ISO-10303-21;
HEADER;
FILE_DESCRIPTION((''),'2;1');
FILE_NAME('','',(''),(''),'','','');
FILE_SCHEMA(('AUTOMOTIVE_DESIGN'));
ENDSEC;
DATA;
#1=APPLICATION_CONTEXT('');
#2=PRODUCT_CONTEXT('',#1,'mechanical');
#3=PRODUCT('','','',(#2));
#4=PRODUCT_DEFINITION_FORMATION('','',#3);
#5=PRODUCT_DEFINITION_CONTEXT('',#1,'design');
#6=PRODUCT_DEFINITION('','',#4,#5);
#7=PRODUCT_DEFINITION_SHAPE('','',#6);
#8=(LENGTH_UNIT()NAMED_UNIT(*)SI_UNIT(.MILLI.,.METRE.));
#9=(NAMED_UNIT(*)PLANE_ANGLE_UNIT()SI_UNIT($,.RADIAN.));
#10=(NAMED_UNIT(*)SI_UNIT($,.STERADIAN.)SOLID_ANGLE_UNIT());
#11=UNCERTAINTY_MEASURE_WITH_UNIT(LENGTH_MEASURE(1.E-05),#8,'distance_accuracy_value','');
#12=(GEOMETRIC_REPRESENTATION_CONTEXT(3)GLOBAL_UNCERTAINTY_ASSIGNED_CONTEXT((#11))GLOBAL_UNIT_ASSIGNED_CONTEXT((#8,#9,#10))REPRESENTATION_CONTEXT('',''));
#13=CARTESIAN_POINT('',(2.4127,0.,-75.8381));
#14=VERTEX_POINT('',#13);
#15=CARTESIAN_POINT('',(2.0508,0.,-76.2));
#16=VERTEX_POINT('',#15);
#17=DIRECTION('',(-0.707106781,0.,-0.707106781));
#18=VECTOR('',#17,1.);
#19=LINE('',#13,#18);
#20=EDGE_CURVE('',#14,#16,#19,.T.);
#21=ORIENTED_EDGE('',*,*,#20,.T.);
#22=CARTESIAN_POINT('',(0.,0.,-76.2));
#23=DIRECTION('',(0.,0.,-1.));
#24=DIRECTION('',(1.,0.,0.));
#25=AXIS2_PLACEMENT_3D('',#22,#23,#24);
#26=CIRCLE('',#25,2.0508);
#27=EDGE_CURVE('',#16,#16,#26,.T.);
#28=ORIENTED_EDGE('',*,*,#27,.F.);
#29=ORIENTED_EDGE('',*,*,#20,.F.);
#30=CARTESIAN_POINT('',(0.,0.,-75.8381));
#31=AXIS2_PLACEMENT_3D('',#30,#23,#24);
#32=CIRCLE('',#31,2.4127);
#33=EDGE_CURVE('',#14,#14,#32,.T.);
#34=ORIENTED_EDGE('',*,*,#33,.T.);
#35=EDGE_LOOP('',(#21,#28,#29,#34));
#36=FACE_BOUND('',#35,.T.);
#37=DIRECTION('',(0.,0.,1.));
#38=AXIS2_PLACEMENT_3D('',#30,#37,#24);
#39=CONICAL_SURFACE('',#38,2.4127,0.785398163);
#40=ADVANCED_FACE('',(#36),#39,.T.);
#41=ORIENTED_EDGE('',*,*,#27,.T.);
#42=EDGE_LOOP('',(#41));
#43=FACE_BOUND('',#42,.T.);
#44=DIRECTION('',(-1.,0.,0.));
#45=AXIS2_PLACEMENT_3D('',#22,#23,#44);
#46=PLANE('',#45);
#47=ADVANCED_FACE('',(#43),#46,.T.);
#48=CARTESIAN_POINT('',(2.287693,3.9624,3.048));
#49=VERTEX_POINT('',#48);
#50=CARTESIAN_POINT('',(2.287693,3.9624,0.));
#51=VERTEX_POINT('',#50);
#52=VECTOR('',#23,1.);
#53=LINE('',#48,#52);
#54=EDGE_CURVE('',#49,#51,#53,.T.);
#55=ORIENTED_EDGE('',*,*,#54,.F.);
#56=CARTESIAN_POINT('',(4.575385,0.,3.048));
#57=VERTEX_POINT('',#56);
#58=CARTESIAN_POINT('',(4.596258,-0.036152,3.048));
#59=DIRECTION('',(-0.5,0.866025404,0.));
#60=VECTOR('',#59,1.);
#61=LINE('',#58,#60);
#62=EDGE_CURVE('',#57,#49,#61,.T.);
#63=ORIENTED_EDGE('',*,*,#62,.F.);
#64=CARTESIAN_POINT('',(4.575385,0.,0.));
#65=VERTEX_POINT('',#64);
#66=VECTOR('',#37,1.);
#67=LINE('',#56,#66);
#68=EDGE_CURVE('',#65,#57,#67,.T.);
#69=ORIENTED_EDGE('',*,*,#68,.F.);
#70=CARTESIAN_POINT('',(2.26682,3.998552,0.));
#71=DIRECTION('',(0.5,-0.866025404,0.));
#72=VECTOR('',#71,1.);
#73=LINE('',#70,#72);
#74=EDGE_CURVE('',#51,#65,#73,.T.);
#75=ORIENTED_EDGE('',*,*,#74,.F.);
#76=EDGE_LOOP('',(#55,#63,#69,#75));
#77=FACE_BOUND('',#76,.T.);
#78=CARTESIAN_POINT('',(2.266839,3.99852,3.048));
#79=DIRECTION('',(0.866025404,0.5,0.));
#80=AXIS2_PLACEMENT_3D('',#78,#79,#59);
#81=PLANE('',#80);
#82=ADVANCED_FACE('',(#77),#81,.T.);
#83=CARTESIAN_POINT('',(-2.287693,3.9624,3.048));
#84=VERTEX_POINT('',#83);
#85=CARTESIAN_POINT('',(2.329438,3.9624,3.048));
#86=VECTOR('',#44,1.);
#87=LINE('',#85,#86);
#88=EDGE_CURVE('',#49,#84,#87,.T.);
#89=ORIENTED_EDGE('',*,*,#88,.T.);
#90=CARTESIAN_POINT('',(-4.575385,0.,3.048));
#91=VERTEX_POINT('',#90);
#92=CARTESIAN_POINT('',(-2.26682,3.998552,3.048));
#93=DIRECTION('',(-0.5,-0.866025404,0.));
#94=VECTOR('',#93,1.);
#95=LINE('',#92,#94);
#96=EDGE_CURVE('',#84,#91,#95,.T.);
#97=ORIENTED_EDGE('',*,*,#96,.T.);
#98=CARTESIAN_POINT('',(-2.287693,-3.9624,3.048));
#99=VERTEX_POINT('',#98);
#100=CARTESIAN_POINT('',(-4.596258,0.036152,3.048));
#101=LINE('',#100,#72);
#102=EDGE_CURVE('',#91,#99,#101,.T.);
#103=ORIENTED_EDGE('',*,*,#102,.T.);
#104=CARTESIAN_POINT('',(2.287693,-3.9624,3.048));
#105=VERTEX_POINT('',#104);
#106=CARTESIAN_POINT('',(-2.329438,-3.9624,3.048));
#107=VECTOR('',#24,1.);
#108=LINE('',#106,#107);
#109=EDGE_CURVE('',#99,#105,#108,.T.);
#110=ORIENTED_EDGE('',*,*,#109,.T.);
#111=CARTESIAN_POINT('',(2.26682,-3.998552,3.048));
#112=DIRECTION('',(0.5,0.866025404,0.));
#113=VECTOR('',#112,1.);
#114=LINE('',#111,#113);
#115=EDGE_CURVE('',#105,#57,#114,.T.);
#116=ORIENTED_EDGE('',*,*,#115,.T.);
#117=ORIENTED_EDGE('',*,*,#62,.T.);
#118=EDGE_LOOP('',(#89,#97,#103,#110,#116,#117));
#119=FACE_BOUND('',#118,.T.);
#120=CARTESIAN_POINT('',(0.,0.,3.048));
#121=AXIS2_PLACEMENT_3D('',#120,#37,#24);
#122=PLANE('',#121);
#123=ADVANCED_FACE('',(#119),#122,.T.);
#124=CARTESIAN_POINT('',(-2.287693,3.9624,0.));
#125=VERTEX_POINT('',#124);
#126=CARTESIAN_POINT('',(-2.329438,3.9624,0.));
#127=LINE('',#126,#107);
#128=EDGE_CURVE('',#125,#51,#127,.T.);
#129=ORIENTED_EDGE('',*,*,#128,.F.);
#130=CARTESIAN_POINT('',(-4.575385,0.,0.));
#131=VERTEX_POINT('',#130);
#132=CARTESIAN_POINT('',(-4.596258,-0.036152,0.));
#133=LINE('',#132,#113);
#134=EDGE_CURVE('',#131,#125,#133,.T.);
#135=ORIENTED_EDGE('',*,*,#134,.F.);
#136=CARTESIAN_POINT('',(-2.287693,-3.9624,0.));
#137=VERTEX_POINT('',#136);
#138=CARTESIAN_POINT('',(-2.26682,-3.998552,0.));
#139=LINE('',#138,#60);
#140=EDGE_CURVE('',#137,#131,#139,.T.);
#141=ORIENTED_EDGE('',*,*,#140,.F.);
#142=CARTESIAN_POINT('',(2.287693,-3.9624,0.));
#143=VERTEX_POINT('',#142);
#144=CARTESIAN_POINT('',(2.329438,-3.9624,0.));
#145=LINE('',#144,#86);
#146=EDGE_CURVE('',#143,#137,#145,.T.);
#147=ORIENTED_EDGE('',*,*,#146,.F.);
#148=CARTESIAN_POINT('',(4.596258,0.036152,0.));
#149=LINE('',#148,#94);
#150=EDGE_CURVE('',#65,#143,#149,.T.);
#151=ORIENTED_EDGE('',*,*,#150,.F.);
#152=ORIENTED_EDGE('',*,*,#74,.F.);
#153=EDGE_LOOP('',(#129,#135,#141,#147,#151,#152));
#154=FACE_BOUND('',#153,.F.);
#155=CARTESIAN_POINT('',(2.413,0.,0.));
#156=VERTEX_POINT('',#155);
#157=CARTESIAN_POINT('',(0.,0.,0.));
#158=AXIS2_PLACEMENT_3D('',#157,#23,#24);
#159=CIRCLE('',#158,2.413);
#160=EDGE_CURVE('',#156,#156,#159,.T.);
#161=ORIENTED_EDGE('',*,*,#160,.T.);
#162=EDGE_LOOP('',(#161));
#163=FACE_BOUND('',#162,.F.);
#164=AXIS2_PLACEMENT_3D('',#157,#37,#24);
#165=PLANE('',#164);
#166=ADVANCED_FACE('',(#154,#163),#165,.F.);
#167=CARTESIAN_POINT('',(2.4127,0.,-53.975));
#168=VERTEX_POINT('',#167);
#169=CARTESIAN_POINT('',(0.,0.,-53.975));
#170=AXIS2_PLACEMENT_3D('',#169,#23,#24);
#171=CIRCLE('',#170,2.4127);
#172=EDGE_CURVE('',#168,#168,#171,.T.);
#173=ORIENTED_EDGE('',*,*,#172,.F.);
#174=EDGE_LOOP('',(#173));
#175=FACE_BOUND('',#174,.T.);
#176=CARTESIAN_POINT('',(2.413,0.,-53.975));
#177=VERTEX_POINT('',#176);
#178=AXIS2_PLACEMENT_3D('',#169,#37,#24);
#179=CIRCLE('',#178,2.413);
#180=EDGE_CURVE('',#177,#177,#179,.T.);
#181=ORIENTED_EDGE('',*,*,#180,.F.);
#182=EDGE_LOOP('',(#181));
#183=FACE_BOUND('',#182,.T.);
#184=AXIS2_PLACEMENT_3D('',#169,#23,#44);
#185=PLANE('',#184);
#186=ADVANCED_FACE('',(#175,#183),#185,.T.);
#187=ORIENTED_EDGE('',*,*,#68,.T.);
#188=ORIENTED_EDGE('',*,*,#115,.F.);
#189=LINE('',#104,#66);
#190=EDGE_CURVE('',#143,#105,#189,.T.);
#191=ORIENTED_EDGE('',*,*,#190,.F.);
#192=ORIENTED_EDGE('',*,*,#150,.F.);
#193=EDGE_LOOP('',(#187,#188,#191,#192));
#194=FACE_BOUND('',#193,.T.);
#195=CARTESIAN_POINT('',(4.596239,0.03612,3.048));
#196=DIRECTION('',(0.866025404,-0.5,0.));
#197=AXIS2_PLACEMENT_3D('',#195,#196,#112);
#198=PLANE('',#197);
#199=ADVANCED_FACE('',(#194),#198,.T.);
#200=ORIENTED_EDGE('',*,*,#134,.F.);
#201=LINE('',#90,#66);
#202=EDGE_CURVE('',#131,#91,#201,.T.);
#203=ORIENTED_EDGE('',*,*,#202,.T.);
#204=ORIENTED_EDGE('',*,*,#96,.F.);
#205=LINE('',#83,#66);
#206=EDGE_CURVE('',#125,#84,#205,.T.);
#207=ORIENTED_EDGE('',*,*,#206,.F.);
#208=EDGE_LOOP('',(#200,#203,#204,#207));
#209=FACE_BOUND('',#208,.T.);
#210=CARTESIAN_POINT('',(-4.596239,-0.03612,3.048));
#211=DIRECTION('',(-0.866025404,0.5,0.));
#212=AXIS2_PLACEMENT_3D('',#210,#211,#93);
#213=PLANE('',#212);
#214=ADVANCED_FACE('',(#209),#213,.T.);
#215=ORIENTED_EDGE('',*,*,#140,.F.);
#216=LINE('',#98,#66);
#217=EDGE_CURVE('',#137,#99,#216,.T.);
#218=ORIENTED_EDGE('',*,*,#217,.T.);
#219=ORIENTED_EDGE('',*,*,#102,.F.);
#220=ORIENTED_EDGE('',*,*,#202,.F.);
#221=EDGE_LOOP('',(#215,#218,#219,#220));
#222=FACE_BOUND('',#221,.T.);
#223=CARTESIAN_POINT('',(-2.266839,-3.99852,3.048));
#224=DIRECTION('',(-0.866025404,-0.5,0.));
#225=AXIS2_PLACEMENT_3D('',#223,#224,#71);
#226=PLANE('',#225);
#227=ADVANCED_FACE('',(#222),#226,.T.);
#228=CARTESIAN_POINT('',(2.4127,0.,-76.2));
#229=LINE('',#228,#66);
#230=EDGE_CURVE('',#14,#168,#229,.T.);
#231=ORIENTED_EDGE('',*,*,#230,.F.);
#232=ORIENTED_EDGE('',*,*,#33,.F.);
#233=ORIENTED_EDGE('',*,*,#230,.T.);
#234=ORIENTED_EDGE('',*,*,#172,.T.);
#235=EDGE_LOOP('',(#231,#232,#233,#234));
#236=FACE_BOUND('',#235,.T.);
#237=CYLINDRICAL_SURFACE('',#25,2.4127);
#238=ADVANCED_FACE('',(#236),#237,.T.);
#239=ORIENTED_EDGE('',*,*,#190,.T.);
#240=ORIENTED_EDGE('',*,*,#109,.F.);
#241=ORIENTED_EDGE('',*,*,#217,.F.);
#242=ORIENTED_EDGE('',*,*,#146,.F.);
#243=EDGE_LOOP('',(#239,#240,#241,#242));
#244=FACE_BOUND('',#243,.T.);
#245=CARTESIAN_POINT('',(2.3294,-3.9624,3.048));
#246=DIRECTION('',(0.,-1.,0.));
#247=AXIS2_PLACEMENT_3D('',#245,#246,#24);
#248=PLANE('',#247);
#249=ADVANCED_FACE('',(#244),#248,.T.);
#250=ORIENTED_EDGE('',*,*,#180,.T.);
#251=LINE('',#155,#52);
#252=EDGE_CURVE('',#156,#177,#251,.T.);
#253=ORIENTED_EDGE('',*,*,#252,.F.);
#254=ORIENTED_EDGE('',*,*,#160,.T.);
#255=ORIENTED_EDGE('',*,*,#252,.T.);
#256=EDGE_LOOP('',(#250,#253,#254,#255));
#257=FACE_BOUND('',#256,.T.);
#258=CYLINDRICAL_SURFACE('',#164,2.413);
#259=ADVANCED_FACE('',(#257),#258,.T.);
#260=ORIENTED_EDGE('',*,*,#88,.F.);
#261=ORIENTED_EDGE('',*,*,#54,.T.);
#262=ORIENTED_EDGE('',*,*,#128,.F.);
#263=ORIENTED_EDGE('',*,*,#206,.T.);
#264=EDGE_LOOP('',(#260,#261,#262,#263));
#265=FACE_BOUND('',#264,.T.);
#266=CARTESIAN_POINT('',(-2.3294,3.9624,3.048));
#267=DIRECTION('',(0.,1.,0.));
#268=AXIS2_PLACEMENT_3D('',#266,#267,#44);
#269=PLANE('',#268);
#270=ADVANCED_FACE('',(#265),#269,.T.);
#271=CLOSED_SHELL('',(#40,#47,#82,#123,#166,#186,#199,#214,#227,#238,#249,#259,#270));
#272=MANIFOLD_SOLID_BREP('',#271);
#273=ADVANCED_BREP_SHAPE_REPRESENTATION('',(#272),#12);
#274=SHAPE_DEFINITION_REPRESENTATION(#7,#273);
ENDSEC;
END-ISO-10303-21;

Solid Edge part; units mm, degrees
sketch "Sketch1" plane through (0, 0, 0) normal (0, 0, 1) x (1, 0, 0)
  circle A0 centre (0, 0) radius 4.5964
  dimension "D1" = 9.1928
extrude "Protrusion1" add sketch "Sketch1" along normal blind 3.048
sketch "Sketch2" plane through (0, 0, 0) normal (0, 0, -1) x (1, 0, 0)
  circle A0 centre (0, 0) radius 2.413
extrude "Protrusion2" add sketch "Sketch2" along normal blind 76.2
sketch "Sketch3" plane through (0, 0, -76.2) normal (0, 0, -1) x (1, 0, 0)
  circle A0 centre (0, 0) radius 2.4127
extrude "Cutout1" cut sketch "Sketch3" against normal blind 22.225 flip side to cut
chamfer "Chamfer_1" distance 0.3619 angle 45 1 edges at (-2.4127, 0, -76.2)
sketch "Sketch4" plane through (0, 0, 3.048) normal (0, 0, 1) x (1, 0, 0)
  line L0 (-2.3294, 3.9624) -> (2.3294, 3.9624)
  dimension "D1" = 7.9248
extrude "Cutout2" cut sketch "Sketch4" against normal up to next material side at (0, 4.0124, 3.048)
pattern_circular "Pattern1" count 6 over 360 about axis through (0, 0, 3.048) along (0, 0, 1) of "Cutout2"
properties part number "148022"
